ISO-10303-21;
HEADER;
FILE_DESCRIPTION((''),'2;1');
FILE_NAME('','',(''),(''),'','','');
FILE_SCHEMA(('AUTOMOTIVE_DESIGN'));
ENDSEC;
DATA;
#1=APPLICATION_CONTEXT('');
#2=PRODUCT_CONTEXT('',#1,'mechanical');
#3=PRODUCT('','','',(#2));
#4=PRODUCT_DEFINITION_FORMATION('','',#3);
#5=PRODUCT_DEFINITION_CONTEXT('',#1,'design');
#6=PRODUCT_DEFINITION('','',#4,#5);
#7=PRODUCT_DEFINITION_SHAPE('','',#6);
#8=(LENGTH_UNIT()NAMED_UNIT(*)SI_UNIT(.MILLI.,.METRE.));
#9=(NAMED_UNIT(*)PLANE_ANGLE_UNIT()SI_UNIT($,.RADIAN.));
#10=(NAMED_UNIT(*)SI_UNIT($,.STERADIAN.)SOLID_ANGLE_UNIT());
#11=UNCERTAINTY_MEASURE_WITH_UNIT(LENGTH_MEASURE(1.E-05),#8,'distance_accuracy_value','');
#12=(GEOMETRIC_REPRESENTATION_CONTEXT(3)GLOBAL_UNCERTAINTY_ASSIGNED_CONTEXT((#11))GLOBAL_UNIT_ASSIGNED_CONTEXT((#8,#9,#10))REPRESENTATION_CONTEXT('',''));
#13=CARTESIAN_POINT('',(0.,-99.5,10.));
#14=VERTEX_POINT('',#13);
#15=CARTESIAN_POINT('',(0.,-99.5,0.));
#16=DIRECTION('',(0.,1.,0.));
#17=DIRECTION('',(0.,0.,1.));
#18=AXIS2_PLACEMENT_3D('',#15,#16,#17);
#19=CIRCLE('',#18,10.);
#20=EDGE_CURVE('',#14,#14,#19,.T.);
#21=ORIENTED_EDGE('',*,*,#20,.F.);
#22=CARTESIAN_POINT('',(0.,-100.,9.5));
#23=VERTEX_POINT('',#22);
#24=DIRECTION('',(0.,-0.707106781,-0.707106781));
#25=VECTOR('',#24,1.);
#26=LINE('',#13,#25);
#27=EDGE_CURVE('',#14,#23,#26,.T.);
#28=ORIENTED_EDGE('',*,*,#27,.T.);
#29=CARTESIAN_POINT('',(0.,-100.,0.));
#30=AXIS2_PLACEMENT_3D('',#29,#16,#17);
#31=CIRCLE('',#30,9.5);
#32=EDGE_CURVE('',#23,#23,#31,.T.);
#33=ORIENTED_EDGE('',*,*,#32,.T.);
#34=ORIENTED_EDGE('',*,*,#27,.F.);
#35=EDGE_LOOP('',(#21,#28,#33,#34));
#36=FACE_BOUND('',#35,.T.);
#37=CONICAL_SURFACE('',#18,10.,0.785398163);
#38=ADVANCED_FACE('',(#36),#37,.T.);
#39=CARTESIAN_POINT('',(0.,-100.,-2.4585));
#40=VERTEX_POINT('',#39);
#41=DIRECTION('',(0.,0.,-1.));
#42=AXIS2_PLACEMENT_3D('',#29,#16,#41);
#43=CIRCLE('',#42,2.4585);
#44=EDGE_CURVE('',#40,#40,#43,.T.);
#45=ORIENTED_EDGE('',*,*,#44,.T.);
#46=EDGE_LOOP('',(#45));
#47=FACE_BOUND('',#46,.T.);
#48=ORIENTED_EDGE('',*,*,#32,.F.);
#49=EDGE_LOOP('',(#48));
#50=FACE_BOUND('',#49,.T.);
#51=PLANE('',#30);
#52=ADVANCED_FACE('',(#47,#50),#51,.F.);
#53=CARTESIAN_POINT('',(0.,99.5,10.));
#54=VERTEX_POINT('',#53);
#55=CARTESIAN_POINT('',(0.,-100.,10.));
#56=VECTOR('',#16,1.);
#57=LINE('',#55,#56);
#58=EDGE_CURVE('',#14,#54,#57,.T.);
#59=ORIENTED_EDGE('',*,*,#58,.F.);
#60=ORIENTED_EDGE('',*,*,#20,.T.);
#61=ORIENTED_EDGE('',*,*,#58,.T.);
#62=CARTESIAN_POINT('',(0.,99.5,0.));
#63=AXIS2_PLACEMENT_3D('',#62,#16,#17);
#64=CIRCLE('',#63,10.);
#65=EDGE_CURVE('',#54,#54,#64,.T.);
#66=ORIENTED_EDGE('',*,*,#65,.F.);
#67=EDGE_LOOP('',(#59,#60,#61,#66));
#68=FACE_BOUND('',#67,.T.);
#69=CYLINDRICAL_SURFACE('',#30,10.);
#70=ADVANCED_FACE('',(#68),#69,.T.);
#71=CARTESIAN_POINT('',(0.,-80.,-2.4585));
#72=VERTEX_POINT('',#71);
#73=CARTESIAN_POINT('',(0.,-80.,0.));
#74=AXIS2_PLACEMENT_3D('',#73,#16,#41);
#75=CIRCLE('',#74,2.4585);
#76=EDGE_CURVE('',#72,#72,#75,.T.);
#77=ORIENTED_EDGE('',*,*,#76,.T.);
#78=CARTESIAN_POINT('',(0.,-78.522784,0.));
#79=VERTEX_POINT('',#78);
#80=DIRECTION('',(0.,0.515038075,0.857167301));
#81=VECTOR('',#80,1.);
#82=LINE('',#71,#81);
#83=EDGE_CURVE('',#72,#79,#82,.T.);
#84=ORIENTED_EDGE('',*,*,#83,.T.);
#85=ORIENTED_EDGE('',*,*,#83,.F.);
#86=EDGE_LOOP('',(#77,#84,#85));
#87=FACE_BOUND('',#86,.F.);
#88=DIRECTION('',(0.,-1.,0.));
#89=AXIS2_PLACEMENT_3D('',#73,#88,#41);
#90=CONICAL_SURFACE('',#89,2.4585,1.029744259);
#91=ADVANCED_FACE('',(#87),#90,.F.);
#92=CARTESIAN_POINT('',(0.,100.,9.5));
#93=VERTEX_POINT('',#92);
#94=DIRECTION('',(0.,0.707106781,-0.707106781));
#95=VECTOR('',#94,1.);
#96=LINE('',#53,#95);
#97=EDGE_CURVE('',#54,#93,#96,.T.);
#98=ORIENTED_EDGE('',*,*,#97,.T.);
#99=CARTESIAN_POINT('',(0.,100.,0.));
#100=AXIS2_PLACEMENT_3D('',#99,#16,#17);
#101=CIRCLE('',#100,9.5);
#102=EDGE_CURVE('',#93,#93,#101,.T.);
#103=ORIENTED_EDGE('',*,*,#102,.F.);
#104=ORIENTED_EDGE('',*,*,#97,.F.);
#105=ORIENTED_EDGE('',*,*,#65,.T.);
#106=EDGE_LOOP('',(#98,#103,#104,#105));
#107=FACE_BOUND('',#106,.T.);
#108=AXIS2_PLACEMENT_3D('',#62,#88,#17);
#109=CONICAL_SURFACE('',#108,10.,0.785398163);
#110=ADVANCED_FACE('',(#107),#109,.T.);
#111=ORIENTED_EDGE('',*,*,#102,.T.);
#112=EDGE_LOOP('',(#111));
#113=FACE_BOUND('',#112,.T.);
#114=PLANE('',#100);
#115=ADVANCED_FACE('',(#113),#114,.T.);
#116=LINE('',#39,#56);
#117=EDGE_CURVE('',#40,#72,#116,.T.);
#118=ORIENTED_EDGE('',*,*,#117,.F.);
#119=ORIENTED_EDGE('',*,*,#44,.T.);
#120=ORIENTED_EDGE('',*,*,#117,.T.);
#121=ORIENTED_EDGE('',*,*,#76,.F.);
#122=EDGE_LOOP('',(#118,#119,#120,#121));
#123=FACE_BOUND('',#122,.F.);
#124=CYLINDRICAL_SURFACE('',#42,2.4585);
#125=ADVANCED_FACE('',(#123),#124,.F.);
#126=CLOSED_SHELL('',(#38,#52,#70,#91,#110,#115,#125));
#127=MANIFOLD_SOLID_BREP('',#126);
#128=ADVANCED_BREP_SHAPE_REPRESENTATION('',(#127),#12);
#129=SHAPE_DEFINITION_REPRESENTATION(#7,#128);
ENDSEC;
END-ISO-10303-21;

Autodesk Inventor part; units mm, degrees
ref_plane "YZ Plane" through (0, 0, 0) normal (1, 0, 0) x (0, 1, 0)
ref_plane "XZ Plane" through (0, 0, 0) normal (0, 1, 0) x (-1, 0, 0)
ref_plane "XY Plane" through (0, 0, 0) normal (0, 0, 1) x (1, 0, 0)
sketch "Sketch1" plane through (0, 0, 0) normal (1, 0, 0) x (0, 1, 0)
  line L0 (-140, 0) -> (140, 0) construction
  line L1 (0, -2) -> (0, 12) construction
  line L2 (-100, 10) -> (100, 10)
  line L3 (100, 10) -> (100, 0)
  line L4 (100, 0) -> (-100, 0)
  line L5 (-100, 0) -> (-100, 10)
  point P0 (0, 0)
  dimension "d0" = 20
  dimension "d1" = 200
revolve "Revolution1" add sketch "Sketch1" angle 360 about axis through (0, -10, 0) along (0, 1, 0)
sketch "Sketch2" plane through (0, -100, 0) normal (0, -1, 0) x (1, 0, 0)
  circle A0 centre (0, 0) radius 10 projected
hole "Hole1" at (0, -100, 0) direction (0, 1, 0) diameter 4.917 depth 20 tip angle 118 thread size "M6x1" class "6H" standard "ISO Metric profile"
chamfer "Chamfer1" distance 0.5 angle 45 2 edges at (0, -100, -10) (0, 100, -10)
properties part number "DLT-01-236B" material "Aço SAE 1045"
